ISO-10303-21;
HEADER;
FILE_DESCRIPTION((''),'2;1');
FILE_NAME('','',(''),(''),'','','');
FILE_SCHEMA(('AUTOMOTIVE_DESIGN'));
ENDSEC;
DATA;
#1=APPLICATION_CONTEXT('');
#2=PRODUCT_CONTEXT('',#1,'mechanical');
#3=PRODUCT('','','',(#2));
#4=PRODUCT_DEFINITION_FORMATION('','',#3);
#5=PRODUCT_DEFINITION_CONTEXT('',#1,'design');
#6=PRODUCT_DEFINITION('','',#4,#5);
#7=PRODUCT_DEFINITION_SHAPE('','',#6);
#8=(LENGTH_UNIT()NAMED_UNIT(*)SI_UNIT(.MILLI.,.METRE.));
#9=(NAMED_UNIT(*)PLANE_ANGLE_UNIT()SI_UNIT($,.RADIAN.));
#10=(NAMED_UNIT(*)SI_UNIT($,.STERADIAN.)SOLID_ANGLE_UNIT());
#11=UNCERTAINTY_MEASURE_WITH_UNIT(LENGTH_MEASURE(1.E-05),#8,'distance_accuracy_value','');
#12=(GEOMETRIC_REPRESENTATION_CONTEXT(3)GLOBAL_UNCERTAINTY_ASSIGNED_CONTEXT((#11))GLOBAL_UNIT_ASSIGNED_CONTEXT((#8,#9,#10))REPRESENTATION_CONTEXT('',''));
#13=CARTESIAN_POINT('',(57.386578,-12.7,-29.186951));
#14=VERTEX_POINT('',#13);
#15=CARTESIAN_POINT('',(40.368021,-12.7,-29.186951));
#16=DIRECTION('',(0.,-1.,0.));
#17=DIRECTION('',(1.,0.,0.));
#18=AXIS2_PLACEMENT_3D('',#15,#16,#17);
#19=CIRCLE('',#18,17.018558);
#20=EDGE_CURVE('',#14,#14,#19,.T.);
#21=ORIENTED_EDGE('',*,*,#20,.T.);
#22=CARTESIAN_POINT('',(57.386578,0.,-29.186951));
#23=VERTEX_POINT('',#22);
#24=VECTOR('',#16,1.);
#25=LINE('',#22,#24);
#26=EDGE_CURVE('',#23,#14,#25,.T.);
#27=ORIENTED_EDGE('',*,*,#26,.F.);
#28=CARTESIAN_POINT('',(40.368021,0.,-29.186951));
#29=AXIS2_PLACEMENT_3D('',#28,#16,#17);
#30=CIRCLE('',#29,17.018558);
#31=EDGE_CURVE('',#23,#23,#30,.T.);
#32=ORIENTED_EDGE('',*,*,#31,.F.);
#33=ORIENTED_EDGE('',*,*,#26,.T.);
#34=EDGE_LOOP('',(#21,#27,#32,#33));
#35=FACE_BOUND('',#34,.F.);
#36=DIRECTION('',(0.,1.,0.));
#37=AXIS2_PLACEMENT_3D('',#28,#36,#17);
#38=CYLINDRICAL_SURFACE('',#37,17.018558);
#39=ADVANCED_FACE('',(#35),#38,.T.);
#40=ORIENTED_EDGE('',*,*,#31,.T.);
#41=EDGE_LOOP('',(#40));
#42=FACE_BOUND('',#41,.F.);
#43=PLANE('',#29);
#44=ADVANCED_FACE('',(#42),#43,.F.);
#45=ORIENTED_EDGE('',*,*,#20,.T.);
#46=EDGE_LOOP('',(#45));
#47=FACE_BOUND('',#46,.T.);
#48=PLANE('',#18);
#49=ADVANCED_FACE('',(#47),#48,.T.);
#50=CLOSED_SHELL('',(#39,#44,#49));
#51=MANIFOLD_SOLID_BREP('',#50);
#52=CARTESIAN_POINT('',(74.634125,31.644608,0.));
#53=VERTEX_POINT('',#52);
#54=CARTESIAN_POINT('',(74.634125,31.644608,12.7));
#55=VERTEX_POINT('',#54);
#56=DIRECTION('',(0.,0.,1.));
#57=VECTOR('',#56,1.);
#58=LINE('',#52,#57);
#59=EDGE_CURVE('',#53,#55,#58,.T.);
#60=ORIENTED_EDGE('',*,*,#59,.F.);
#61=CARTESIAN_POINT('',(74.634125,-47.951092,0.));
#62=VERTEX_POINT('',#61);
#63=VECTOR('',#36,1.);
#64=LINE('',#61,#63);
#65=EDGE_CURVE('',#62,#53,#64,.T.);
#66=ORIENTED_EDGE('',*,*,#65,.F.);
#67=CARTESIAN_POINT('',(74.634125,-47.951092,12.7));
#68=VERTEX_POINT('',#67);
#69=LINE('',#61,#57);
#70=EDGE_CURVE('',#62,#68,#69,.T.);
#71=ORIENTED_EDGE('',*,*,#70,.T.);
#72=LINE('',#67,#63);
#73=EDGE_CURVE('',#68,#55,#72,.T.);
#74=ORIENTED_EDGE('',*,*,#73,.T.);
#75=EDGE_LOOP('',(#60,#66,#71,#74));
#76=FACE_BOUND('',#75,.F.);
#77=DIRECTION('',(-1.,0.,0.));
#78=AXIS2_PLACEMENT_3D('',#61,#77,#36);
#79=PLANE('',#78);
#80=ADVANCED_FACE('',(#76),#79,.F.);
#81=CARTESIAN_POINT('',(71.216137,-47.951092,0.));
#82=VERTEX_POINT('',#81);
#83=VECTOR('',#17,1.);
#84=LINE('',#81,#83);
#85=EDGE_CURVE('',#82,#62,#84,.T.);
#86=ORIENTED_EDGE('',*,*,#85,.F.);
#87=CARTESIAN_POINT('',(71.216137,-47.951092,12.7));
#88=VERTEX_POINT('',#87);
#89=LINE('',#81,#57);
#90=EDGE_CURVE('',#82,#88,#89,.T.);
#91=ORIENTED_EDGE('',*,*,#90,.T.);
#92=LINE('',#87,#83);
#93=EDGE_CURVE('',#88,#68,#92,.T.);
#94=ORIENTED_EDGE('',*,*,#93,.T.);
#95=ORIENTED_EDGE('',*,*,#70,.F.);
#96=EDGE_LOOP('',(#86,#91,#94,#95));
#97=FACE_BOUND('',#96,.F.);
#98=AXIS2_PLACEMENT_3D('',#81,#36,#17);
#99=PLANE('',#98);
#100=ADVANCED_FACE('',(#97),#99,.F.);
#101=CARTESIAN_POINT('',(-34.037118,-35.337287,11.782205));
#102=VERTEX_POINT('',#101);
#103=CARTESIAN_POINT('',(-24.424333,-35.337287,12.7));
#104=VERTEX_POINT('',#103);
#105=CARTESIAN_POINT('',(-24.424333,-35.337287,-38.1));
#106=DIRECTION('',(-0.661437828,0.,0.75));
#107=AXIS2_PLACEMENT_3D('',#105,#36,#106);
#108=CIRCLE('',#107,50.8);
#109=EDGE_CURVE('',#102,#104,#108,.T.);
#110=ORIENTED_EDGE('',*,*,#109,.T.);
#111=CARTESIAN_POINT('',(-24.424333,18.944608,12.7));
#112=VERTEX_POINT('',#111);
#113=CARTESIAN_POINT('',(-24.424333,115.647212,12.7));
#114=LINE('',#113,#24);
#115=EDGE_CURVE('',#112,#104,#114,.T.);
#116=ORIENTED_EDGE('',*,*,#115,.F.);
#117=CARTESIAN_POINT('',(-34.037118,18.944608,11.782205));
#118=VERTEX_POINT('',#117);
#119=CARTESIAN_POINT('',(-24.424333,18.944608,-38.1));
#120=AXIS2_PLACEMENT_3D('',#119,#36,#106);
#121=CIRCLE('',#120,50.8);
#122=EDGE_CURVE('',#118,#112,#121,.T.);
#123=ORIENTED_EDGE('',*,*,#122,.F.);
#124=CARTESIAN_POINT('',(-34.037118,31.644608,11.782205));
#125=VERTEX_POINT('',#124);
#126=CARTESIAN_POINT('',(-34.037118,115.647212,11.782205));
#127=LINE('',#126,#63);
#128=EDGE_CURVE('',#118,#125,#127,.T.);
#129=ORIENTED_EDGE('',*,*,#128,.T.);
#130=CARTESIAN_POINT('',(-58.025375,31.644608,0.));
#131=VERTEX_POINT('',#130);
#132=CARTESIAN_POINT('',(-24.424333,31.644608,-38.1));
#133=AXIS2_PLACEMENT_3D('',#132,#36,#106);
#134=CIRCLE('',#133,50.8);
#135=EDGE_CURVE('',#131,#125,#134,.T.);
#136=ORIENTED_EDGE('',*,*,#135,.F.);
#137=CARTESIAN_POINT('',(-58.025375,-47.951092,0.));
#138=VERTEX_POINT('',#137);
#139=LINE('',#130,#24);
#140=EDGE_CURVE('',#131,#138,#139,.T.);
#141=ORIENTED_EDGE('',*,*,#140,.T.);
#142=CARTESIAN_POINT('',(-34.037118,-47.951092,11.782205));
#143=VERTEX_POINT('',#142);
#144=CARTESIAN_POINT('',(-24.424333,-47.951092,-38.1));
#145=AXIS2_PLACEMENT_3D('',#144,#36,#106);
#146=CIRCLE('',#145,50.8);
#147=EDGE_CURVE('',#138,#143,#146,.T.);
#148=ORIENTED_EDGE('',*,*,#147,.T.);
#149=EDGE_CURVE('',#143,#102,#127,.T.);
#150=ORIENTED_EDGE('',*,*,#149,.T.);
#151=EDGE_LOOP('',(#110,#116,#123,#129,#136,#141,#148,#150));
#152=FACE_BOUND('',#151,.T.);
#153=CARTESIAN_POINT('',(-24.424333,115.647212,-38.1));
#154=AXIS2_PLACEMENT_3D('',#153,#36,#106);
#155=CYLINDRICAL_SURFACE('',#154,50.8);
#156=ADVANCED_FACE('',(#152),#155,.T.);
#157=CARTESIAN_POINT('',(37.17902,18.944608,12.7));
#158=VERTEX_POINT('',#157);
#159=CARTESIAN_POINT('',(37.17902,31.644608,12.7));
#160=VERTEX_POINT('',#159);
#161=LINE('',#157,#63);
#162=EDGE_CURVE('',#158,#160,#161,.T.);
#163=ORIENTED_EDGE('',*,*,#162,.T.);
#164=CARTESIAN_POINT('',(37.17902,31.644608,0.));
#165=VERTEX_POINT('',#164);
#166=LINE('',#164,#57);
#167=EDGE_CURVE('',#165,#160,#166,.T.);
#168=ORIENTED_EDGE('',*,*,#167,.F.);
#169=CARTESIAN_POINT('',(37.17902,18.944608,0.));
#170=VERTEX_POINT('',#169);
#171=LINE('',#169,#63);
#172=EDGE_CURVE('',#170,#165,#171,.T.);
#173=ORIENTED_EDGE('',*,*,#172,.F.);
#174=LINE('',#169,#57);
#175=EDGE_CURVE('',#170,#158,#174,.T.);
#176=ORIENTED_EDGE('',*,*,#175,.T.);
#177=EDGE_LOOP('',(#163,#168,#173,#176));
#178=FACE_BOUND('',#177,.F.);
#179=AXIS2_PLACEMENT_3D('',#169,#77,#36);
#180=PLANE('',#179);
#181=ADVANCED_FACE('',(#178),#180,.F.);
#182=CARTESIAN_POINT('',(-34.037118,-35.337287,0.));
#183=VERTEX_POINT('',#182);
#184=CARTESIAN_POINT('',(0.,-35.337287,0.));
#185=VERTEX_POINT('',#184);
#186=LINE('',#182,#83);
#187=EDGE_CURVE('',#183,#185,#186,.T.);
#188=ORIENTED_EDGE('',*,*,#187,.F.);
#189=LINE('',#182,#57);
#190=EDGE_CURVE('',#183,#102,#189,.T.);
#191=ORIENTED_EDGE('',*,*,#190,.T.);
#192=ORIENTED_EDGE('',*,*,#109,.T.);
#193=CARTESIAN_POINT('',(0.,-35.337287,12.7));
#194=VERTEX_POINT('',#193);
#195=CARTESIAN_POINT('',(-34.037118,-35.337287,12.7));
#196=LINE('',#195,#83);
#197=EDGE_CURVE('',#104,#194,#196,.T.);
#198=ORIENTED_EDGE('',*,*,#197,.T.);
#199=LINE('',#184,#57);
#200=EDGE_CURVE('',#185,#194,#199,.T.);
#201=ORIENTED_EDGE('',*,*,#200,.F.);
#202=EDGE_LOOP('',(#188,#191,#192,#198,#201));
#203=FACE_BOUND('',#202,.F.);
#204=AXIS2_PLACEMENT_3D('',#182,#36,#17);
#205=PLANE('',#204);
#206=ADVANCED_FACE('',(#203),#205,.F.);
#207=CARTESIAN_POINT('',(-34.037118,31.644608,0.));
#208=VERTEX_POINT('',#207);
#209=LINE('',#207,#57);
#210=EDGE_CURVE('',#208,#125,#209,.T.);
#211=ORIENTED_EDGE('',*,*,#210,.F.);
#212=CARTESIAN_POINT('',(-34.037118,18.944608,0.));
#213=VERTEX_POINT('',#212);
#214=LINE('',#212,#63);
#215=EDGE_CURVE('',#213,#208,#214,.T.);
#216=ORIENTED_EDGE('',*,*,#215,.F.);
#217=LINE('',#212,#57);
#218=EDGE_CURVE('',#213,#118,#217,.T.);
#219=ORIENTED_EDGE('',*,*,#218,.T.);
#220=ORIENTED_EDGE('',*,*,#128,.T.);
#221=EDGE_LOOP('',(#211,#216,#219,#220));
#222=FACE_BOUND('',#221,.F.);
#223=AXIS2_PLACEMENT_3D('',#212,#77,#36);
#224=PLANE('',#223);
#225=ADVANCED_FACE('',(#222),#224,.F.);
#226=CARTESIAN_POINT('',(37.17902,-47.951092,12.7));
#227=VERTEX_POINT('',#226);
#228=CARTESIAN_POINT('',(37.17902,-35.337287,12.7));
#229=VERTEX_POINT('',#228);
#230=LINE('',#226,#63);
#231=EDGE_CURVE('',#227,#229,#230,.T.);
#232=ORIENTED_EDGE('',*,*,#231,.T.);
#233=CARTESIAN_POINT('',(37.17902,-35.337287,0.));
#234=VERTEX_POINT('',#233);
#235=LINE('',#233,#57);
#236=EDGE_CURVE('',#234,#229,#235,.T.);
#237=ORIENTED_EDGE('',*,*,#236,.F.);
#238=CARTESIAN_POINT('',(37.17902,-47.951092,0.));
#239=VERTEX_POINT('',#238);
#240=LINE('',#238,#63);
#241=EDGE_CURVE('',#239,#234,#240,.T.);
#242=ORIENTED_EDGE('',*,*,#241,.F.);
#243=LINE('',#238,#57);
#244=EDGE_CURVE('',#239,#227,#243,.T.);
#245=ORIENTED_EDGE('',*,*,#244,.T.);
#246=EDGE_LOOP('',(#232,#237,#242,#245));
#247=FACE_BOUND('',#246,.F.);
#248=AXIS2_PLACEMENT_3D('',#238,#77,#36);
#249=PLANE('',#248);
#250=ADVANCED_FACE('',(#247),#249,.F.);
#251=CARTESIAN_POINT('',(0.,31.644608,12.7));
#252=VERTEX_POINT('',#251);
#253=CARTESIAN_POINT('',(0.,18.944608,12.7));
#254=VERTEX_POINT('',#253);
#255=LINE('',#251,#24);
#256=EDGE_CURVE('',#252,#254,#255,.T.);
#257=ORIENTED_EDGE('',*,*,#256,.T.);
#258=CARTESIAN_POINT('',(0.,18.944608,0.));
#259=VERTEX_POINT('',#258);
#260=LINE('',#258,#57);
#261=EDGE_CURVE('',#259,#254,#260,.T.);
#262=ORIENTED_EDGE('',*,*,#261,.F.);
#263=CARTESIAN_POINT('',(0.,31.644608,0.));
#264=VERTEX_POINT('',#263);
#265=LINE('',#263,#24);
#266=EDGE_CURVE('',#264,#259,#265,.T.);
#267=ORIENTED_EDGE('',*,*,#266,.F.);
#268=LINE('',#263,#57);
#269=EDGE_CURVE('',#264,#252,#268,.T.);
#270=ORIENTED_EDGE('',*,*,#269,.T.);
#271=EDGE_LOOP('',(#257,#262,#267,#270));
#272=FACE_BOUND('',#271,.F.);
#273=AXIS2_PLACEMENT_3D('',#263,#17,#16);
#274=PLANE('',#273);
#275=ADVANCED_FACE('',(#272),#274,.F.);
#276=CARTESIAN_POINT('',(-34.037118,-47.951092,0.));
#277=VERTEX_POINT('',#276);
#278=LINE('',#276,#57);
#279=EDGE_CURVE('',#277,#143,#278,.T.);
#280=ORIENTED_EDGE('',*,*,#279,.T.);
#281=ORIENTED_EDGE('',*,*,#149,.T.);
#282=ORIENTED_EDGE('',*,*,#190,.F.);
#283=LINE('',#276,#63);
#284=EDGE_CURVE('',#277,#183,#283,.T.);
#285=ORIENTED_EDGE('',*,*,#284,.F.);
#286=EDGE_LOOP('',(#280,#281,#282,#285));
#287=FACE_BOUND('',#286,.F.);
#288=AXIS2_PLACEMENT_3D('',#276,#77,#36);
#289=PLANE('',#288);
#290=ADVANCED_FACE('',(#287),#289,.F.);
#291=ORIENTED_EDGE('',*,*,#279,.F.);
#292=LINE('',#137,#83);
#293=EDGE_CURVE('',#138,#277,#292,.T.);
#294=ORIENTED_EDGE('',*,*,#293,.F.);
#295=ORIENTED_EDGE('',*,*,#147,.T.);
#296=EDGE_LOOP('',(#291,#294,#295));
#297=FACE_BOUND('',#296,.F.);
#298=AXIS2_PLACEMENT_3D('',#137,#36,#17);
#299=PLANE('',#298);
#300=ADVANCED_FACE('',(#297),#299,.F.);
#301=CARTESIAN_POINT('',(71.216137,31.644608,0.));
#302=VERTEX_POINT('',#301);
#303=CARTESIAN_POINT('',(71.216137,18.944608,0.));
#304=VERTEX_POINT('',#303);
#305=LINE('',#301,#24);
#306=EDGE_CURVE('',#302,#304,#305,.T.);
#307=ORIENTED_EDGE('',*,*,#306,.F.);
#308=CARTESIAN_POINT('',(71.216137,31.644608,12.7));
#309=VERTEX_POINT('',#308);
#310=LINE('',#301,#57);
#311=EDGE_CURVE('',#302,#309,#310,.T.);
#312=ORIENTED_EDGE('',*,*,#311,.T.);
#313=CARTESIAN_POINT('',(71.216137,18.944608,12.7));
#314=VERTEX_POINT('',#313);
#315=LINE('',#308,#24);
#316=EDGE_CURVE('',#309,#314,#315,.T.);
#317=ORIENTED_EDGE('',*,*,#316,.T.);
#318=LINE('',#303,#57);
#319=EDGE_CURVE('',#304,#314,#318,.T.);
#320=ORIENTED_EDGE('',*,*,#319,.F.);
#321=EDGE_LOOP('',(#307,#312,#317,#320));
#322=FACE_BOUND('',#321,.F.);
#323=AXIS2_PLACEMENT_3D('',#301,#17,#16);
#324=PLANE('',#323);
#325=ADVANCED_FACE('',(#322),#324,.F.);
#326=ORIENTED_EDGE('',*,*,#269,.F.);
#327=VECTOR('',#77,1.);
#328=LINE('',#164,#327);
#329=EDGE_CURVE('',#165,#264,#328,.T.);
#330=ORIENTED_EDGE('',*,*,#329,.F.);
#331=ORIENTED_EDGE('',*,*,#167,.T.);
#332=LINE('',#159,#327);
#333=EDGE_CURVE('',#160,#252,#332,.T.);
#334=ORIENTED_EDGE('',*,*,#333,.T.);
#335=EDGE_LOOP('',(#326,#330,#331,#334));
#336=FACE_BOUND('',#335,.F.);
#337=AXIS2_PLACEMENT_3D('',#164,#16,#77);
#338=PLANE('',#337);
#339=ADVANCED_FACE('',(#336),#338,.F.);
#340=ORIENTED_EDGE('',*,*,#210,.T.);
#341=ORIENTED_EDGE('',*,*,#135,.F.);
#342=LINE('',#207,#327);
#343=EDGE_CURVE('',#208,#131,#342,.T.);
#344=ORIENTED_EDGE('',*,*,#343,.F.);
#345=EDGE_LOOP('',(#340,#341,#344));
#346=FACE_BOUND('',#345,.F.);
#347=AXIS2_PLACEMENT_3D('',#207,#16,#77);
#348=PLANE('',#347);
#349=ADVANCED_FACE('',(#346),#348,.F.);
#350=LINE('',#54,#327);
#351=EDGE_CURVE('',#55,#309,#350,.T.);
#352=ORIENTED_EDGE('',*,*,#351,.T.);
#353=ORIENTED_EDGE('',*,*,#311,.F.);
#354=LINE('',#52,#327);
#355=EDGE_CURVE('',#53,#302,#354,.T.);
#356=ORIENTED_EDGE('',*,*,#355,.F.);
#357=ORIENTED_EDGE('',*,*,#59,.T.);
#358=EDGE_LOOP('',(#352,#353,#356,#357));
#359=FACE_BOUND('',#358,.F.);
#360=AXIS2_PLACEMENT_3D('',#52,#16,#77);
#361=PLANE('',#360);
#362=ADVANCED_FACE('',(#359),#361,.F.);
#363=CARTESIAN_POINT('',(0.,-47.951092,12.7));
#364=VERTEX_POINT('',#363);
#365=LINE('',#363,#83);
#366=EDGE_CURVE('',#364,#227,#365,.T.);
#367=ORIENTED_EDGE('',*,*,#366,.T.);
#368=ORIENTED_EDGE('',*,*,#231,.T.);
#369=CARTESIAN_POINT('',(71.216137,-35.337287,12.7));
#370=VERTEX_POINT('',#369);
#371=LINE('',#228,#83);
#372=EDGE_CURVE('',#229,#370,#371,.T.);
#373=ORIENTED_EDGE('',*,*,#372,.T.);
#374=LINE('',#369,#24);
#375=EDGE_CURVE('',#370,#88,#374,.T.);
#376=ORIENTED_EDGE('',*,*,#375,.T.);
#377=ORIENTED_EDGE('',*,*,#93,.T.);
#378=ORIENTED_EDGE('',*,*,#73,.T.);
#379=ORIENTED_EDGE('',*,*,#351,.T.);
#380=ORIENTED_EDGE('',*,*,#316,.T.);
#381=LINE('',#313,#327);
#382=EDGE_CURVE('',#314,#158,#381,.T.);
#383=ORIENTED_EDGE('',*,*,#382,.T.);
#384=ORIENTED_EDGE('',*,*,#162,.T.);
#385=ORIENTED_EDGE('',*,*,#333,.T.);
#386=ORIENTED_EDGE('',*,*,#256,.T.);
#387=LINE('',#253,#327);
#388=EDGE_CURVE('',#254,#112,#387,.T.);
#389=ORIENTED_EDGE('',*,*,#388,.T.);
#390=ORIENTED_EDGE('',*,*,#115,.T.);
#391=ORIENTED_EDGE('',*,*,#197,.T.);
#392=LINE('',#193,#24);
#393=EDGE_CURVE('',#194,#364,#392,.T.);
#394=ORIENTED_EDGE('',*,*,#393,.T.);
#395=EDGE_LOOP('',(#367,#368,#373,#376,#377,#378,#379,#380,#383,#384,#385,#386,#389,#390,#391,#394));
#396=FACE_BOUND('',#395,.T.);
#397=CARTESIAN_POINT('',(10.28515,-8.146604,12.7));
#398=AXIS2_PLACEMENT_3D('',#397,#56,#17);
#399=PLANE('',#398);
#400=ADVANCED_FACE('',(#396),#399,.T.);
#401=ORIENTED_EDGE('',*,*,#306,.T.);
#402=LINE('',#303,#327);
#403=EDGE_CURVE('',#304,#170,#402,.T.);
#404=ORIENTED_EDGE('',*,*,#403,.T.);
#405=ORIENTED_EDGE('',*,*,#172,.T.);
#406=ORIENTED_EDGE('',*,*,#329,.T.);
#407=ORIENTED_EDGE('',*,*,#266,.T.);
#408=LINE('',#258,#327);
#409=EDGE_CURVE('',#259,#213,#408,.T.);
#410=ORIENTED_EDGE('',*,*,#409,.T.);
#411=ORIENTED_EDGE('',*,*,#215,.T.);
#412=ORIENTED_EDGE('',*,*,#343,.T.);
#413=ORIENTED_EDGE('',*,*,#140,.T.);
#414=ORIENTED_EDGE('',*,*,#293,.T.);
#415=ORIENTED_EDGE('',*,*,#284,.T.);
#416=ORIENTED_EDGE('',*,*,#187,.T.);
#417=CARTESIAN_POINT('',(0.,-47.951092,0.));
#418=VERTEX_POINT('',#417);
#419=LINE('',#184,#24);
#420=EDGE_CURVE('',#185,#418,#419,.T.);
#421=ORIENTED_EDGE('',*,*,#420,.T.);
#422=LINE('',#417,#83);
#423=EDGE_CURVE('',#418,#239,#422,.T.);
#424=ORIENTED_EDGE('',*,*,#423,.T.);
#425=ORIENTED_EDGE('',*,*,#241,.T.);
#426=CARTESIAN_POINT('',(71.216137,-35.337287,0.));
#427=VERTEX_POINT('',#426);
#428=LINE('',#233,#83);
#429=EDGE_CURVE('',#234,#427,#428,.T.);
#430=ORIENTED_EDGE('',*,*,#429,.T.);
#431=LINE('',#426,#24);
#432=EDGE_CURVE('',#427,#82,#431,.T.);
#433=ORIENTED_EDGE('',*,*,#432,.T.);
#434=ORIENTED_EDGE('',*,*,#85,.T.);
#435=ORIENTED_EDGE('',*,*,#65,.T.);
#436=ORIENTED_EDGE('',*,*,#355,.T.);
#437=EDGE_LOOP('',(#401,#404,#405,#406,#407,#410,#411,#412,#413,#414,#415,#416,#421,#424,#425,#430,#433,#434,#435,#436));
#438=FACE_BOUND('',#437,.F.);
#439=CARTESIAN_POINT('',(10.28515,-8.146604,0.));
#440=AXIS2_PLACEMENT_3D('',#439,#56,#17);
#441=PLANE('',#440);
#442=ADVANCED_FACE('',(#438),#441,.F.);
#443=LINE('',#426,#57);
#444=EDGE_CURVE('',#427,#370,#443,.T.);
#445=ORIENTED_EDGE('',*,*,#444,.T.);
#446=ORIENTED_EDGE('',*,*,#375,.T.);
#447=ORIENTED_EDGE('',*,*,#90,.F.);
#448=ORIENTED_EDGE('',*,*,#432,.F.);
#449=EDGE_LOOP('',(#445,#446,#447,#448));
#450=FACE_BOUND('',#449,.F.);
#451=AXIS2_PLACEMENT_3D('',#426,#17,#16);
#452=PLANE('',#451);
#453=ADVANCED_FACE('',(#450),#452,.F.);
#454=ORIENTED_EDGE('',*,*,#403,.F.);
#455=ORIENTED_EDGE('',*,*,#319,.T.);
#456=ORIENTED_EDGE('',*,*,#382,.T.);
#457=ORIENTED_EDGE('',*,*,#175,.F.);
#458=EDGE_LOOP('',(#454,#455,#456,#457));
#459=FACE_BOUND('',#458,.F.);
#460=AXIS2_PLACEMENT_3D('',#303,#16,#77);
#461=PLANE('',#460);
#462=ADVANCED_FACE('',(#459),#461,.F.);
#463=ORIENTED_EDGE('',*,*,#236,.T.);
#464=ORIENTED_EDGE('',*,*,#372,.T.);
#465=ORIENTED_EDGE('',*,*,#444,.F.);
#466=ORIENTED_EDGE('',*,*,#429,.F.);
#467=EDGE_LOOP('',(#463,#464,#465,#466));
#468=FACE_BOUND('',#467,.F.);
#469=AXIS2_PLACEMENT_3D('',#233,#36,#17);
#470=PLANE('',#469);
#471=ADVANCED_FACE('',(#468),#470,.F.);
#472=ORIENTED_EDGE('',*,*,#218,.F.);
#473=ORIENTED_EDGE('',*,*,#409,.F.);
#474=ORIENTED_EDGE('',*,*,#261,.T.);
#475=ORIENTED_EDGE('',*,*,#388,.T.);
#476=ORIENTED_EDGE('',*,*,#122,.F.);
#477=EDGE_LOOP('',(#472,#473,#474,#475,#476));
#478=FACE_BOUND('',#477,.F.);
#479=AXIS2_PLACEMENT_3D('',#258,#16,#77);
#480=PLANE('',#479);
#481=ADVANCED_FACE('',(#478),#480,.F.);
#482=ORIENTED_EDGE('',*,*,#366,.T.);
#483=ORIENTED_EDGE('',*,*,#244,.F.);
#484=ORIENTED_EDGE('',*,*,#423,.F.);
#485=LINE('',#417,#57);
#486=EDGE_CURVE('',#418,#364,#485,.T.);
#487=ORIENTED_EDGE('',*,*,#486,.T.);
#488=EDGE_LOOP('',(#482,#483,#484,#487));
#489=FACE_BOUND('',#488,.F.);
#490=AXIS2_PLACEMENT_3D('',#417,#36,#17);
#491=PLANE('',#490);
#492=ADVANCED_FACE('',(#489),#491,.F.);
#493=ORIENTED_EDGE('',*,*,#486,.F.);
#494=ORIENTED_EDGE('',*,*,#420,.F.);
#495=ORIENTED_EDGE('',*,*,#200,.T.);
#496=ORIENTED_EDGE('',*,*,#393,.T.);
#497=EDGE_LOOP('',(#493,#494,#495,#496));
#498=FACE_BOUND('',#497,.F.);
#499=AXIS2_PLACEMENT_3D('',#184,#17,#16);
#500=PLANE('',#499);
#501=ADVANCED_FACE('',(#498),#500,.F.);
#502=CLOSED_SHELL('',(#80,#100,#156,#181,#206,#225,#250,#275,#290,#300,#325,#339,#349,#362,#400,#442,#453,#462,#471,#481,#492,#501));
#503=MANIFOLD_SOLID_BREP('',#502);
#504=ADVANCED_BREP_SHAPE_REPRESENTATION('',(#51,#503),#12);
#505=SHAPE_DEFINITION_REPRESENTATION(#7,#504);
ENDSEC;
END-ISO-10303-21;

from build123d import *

# Parameters (mm, degrees)
F1_DEPTH    = 12.7
F2_T1_DEPTH = 247.6009079887
F3_R        = 17.0185577346
F4_DEPTH    = 12.7


# Not quite as in the source:
# - a fillet or chamfer that OpenCascade refuses, or shapes differently, is made with other operations: its cross-section is extruded or revolved along the edge and cut away or added


with BuildPart() as f1:
    # F0 (on Top) → F1 (new body)
    with BuildSketch(Plane.XY):
        Polygon((-34.0371176, 31.6446077985), (-58.0253747608, 31.6446077985), (-58.0253747608, -47.9510919376), (-34.0371176, -47.9510919376), (-34.0371176, -35.3372873902), (0, -35.3372873902), (0, -47.9510919376), (37.1790196625, -47.9510919376), (37.1790196625, -35.3372873902), (71.2161372625, -35.3372873902), (71.2161372625, -47.9510919376), (74.6341247993, -47.9510919376), (74.6341247993, 31.6446077985), (71.2161372625, 31.6446077985), (71.2161372625, 18.9446077985), (37.1790196625, 18.9446077985), (37.1790196625, 31.6446077985), (0, 31.6446077985), (0, 18.9446077985), (-34.0371176, 18.9446077985), align=None)
    extrude(amount=F1_DEPTH)

    # F2: fillet of radius 50.8 on 1 edges, made by hand

    # F2_s2 → F2_t1 (cut)
    with BuildSketch(Plane.XZ.offset(-115.6472119248)):
        with BuildLine():
            ThreePointArc((-58.0253747608, 0), (-42.3848453524, 9.419048812), (-24.4243331103, 12.7))
            Line((-24.4243331103, 12.7), (-58.0253747608, 12.7))
            Line((-58.0253747608, 12.7), (-58.0253747608, 0))
        make_face()
    extrude(amount=F2_T1_DEPTH, mode=Mode.SUBTRACT)


with BuildPart() as f4:
    # F3 (on Front) → F4 (new body)
    with BuildSketch(Plane.XZ):
        with Locations((40.3680205345, -29.1869509965)):
            Circle(F3_R)
    extrude(amount=F4_DEPTH)


solid = Compound([f1.part, f4.part])
